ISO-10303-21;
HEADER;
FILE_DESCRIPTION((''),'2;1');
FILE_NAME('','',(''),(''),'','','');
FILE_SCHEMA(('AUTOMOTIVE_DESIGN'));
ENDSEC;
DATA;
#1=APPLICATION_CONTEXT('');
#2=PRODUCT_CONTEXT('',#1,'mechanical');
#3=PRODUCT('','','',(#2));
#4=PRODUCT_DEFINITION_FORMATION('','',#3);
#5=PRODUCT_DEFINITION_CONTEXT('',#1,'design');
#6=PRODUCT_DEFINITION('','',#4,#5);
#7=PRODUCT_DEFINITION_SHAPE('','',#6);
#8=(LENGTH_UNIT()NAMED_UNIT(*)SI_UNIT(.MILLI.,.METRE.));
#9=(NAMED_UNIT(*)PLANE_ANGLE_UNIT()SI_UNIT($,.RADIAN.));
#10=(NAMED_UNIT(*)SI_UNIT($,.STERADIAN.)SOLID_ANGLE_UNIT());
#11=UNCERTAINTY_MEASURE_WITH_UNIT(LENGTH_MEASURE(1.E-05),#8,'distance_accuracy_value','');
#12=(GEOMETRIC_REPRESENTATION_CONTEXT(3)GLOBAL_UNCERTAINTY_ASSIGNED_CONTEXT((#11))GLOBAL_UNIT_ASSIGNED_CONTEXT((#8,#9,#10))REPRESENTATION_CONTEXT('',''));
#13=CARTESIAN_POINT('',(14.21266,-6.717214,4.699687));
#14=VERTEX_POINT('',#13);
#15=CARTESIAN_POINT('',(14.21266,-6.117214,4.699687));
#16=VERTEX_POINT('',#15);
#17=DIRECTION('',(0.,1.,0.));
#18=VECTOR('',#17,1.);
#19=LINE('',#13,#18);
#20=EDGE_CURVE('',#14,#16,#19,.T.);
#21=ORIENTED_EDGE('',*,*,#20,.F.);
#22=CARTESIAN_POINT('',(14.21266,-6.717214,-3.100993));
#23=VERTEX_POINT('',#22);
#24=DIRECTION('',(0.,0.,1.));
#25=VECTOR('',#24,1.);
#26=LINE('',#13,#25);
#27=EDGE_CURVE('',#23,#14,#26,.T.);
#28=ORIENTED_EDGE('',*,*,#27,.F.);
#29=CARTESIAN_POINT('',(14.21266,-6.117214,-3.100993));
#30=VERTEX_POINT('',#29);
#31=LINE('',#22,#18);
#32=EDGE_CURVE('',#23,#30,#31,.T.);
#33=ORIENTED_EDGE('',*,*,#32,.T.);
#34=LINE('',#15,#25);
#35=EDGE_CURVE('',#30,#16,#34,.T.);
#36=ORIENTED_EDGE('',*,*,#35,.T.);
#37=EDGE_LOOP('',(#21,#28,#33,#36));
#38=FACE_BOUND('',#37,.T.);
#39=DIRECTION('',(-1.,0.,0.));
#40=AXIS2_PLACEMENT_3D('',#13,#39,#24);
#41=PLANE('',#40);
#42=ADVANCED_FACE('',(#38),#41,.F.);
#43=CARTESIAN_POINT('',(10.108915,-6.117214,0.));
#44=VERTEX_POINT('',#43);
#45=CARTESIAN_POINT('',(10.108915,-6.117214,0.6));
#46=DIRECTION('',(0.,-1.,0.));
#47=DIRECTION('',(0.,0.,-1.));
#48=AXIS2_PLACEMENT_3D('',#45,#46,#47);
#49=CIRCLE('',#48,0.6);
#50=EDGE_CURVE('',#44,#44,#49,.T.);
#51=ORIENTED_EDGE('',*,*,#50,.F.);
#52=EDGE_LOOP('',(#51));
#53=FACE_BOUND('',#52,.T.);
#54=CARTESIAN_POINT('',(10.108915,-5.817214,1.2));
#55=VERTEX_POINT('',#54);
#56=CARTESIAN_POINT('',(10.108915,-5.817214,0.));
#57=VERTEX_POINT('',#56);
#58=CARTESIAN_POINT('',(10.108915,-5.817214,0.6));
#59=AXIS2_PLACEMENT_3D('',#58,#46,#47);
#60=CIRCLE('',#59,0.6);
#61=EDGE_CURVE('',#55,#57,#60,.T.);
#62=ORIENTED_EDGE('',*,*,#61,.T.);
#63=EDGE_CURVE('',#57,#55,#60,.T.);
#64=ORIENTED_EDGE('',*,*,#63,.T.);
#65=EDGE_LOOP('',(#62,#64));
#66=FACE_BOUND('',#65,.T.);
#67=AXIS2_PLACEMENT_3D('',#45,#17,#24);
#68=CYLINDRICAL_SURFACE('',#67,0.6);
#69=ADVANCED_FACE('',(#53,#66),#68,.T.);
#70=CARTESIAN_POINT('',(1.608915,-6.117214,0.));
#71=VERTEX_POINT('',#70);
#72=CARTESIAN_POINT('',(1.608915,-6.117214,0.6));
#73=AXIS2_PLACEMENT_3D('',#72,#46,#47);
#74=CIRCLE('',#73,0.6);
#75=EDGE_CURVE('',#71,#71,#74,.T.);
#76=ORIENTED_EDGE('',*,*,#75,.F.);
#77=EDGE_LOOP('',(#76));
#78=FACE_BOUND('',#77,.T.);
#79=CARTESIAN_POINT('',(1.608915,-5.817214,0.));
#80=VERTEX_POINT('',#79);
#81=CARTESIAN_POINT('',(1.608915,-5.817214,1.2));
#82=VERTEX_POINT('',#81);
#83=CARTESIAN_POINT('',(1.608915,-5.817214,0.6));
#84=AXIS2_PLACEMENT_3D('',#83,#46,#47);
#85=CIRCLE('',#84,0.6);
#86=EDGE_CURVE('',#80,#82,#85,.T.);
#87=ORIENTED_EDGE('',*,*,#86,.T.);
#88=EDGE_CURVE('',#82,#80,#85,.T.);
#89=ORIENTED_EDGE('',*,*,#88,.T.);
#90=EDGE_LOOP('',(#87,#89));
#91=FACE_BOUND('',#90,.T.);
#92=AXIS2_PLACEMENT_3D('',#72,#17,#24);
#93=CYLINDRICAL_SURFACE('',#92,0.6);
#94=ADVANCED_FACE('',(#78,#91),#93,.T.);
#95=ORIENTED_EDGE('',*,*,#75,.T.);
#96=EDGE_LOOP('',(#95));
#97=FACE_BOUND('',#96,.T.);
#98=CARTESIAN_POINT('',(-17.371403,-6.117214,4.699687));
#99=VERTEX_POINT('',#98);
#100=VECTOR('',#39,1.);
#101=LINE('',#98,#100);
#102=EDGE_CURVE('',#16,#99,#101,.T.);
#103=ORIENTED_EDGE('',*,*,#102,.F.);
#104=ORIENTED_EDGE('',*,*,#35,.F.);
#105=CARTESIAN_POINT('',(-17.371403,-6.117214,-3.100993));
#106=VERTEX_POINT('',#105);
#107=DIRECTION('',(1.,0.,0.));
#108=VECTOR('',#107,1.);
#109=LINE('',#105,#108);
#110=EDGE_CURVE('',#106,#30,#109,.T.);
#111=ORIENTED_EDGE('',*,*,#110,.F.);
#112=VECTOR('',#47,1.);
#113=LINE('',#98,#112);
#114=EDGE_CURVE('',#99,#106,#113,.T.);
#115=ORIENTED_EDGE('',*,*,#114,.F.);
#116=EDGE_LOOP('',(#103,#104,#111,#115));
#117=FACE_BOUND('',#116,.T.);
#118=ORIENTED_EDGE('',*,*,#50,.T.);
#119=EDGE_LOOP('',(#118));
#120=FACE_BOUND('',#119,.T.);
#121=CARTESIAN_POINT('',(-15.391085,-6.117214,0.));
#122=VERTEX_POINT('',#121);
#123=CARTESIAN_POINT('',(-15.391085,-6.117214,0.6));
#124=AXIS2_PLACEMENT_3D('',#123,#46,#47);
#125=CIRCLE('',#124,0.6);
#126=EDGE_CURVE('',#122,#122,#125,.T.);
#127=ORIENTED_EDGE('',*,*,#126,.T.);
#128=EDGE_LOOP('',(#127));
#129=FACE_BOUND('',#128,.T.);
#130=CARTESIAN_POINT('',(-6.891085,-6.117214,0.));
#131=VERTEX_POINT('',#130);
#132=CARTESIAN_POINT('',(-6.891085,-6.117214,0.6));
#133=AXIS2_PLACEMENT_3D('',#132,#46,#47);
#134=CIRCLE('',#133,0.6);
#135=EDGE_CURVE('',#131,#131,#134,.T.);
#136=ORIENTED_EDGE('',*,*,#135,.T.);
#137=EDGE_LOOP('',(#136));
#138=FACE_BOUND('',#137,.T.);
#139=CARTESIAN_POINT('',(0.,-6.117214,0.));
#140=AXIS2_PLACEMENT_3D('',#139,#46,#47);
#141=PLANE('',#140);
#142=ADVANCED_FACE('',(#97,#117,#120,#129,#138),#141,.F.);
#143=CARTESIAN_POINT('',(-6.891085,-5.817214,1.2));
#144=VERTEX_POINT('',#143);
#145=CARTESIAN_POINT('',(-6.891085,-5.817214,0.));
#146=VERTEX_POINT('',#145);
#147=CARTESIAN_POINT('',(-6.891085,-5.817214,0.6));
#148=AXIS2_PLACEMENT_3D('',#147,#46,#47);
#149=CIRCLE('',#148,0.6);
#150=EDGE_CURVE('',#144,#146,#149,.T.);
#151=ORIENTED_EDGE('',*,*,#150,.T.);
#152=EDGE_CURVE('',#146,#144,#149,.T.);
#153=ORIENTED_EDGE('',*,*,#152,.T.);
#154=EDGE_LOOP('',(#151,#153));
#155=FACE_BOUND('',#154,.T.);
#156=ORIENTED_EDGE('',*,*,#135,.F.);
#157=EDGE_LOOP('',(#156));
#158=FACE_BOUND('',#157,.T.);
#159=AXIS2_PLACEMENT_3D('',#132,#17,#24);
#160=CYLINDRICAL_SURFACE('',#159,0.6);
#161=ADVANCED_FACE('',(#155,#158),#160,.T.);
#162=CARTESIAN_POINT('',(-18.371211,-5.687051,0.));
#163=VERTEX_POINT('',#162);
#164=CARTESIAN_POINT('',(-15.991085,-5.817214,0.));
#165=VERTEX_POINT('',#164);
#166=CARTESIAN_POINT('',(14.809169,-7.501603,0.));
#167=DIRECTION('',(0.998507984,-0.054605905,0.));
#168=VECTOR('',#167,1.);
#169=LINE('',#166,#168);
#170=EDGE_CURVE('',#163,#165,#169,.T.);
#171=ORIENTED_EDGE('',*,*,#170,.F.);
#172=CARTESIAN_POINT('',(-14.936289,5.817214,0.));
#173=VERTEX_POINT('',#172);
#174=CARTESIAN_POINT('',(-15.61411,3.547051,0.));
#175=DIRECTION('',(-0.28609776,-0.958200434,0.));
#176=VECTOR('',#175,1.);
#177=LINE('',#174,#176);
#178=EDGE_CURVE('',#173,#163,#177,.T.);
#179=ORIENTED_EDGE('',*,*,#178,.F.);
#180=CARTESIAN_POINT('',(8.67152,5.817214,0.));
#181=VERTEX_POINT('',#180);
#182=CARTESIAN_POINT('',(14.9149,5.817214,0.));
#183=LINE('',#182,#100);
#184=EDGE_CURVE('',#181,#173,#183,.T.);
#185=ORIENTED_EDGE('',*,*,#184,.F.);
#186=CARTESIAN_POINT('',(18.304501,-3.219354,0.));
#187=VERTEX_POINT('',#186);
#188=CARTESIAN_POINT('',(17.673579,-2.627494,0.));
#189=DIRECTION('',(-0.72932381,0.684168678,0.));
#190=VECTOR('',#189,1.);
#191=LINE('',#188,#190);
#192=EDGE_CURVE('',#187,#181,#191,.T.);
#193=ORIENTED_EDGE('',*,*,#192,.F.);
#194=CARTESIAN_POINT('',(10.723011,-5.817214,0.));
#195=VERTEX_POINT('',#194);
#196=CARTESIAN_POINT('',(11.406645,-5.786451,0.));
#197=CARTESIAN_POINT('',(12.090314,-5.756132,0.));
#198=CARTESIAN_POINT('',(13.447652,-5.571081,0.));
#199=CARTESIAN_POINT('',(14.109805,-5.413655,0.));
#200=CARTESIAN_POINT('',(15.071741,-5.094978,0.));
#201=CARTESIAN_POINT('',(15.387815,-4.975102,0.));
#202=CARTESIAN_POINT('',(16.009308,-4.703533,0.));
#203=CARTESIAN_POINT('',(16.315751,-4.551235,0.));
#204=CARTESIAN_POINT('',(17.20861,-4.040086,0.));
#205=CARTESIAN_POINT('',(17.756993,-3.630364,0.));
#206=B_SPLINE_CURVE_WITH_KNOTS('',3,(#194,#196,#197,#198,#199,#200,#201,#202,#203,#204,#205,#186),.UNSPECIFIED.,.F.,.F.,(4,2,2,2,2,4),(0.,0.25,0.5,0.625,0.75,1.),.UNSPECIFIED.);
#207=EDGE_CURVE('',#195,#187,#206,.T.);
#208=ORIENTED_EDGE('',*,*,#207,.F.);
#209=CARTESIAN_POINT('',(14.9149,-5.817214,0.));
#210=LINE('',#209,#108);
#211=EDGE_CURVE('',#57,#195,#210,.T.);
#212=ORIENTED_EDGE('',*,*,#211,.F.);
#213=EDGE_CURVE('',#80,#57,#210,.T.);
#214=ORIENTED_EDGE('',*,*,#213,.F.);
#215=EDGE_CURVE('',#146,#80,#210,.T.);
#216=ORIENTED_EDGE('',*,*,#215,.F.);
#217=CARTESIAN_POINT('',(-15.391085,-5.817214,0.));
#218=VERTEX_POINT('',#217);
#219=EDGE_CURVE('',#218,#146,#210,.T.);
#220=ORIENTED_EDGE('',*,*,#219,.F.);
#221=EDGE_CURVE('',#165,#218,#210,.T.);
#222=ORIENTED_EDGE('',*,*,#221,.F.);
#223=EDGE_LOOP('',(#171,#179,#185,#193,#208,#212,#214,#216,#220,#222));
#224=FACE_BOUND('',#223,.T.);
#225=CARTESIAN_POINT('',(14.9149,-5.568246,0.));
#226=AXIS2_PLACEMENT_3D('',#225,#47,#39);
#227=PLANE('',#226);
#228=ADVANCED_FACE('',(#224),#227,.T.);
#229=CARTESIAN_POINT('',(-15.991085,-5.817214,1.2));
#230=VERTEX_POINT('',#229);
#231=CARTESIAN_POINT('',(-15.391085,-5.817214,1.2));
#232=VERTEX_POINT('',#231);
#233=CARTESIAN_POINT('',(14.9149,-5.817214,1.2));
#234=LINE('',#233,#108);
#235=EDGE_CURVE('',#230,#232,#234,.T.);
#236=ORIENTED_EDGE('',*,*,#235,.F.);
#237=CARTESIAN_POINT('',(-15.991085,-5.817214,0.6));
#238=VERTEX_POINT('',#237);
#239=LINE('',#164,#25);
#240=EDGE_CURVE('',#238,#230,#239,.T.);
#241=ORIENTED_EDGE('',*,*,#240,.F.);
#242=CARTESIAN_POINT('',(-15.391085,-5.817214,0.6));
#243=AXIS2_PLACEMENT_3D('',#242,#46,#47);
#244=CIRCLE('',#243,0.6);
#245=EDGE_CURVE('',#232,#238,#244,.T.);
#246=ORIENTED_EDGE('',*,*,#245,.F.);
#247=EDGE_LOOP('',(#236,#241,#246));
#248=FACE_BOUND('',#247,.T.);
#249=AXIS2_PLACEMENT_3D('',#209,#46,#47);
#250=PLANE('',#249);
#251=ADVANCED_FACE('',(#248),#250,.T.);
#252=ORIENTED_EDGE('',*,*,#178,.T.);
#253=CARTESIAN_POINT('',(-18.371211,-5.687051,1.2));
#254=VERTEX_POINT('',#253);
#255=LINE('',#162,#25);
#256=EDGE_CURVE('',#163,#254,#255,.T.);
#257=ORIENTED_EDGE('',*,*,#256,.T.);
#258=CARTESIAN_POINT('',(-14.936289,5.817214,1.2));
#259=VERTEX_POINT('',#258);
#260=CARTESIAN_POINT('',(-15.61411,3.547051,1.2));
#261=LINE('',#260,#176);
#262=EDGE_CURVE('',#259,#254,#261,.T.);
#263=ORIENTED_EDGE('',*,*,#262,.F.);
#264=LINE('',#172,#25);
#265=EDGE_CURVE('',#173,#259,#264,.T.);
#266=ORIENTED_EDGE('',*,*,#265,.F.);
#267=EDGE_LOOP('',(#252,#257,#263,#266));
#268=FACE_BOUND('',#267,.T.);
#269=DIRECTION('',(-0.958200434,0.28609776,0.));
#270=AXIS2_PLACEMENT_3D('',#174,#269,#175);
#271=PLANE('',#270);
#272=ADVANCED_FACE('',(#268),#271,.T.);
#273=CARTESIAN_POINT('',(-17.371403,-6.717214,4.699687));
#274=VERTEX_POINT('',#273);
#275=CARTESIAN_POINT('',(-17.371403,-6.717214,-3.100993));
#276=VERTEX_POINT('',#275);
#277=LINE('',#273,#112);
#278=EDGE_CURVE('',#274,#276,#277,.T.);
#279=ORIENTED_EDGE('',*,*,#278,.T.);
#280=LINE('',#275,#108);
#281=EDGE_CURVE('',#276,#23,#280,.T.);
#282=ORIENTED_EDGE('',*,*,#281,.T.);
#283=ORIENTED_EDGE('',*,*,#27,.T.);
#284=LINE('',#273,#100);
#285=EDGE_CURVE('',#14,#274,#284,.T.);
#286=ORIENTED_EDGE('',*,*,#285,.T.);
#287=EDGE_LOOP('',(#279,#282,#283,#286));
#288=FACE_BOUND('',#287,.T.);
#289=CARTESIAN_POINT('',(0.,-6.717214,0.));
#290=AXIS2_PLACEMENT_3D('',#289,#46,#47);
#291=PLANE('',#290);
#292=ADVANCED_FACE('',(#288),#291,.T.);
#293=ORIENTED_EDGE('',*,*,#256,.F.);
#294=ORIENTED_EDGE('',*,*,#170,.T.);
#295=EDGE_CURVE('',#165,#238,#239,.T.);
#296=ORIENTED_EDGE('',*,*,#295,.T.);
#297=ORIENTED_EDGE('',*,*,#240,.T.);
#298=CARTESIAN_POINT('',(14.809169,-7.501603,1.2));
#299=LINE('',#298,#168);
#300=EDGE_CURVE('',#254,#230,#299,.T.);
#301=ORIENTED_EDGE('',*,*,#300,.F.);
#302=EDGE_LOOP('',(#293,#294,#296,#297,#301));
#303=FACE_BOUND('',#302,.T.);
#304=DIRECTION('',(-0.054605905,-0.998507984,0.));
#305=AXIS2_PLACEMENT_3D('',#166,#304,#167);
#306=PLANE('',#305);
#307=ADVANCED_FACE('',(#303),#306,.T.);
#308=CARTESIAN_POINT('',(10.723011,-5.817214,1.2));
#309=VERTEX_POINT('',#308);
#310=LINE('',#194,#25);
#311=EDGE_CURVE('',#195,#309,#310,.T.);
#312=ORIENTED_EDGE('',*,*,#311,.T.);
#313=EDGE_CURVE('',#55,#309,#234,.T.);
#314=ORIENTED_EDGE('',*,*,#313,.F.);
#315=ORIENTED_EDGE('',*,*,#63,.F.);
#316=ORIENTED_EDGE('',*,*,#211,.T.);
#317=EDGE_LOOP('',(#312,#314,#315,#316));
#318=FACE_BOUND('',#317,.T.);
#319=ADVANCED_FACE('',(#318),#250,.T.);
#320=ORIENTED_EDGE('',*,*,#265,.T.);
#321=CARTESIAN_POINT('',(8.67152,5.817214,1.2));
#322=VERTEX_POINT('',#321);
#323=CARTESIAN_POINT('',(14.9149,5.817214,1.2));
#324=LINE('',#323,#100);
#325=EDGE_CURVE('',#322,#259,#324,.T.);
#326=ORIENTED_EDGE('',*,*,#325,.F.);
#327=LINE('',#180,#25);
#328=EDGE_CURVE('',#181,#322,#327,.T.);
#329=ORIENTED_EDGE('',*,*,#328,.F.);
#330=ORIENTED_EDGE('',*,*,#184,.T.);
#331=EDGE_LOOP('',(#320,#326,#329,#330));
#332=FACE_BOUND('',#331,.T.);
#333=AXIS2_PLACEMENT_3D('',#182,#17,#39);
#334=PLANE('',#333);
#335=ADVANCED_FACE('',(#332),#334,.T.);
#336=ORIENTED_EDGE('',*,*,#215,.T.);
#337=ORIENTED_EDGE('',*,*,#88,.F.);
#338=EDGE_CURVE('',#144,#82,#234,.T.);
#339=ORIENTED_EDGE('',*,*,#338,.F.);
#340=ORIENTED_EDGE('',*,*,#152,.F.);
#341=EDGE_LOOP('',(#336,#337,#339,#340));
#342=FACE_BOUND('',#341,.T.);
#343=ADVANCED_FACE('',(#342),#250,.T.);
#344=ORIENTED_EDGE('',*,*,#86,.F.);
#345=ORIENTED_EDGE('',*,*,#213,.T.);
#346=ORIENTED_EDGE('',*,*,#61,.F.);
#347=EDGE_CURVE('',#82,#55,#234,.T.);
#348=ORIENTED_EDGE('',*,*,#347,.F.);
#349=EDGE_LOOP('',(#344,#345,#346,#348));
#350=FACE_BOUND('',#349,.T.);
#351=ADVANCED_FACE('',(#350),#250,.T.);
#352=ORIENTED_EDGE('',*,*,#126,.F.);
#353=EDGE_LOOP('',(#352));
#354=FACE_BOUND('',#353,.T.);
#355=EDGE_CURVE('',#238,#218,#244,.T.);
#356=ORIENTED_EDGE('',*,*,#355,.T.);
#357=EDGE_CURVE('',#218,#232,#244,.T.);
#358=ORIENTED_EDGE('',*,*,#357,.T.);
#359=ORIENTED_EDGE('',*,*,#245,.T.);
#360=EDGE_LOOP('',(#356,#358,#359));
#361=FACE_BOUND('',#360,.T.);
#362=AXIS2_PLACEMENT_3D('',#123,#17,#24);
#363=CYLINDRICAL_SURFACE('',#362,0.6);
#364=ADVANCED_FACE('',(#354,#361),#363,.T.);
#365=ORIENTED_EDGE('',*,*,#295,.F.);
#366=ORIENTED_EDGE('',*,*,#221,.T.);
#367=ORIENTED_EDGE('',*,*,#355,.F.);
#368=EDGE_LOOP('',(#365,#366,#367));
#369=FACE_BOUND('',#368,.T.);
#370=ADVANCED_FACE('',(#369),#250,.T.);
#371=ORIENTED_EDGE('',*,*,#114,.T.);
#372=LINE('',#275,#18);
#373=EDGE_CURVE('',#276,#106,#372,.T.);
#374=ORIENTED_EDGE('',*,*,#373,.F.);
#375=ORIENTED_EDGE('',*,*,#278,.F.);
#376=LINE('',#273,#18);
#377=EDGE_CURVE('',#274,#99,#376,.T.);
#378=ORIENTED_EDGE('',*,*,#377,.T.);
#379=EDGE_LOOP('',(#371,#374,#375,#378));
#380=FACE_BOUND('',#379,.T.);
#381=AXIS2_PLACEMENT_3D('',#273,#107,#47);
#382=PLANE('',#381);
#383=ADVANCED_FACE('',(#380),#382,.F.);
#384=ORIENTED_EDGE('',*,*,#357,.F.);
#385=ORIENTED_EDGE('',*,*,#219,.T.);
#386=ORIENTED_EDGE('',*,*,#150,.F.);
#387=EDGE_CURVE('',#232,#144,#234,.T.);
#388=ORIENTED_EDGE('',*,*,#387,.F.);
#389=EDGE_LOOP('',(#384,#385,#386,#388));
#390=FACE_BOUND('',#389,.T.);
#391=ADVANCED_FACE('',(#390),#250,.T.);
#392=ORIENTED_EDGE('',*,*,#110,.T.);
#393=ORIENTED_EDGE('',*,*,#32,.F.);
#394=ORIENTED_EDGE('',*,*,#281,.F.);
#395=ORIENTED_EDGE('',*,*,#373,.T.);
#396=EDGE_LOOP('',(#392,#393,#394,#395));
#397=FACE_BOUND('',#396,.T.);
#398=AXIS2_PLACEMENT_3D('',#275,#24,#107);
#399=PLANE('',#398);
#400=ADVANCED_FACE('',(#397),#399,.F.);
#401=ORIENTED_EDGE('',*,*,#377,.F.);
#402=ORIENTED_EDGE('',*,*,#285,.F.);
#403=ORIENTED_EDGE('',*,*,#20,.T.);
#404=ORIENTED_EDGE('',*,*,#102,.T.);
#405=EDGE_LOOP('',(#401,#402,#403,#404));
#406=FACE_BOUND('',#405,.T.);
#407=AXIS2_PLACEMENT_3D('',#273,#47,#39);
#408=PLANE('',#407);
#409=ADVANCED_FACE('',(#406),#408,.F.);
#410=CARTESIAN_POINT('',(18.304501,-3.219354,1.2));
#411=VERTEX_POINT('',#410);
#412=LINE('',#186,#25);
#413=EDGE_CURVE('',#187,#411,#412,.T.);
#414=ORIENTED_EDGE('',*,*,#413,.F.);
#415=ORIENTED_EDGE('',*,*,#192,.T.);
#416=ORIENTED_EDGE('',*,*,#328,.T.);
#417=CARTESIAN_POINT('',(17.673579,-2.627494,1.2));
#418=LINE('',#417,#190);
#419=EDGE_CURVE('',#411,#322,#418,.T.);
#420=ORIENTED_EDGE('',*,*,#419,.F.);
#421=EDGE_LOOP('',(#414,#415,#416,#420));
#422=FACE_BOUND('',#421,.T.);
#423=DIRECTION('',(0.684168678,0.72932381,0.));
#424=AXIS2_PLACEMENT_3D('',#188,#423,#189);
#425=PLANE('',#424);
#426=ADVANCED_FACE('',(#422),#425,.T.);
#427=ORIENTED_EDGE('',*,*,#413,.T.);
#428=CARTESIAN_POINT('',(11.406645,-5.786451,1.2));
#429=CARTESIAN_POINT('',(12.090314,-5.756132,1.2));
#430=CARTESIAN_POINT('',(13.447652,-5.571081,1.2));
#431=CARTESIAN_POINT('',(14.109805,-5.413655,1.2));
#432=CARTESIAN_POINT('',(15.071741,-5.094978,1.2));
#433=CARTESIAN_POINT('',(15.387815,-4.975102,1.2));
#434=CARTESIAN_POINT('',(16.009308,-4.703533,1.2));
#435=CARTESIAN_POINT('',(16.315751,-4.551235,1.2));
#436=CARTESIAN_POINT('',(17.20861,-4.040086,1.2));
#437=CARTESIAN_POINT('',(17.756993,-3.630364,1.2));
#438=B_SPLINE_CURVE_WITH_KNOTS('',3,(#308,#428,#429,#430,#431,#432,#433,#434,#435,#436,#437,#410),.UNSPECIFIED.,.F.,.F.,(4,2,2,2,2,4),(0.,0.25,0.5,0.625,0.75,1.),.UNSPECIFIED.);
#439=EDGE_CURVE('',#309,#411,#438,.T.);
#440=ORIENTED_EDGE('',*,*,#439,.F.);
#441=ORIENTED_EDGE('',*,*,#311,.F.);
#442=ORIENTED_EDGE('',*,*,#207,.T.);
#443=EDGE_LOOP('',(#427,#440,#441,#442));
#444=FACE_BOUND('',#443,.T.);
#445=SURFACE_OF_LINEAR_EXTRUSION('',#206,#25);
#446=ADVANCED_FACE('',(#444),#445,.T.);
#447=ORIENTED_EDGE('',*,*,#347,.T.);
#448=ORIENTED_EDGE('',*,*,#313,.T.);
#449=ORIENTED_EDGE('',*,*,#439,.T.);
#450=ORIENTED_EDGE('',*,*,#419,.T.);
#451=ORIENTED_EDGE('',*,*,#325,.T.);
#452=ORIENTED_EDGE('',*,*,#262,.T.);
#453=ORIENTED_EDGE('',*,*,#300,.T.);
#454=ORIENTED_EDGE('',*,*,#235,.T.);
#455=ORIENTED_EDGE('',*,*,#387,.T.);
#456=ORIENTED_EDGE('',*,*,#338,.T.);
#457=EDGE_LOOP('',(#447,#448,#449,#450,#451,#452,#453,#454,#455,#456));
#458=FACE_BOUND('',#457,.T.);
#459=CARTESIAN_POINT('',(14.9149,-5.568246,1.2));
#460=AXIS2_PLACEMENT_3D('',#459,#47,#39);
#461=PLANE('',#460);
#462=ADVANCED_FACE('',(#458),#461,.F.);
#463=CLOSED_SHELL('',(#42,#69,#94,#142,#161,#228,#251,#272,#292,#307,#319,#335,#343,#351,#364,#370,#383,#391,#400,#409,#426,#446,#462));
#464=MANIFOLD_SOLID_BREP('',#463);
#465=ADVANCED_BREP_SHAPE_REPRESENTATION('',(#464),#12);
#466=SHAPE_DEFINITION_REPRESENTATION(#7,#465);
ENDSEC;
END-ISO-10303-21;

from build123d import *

# Parameters (mm, degrees)
EXTRUDE_1_DEPTH     = 1.2
CUT_EXTRUDE_START   = -1.2
CUT_EXTRUDE_1_DEPTH = 1.2
SKETCH_3_R          = 0.6
EXTRUDE_2_DEPTH     = 0.3
SKETCH_4_W          = 31.58406245
SKETCH_4_H          = 7.800680058
EXTRUDE_3_DEPTH     = 0.6


# Read off the part's stored shape, not the designer's step: Вырез-Вытянуть-Тонкостенный1
with BuildPart() as part:
    # Эскиз1 → Бобышка-Вытянуть1 (new body)
    with BuildSketch(Plane.XY):
        with BuildLine():
            Line((-18.4888994, -6.081212357), (-16.002013835, -6.217213911))
            Line((-16.002013835, -6.217213911), (10.732005982, -6.217213911))
            add(Edge.make_bspline(
                [(10.732005982, -6.217213911), (11.47341135, -6.18385268), (12.922426791, -6.118650915), (15.00936311, -5.600631561), (16.935457079, -4.747576966), (18.044624718, -3.914711141), (18.600667338, -3.497182825)],
                knots=[0, 0, 0, 0, 0.261630689, 0.511335532, 0.755025064, 1, 1, 1, 1], degree=3))
            Line((18.600667338, -3.497182825), (18.870975113, -3.202301616))
            Line((18.870975113, -3.202301616), (8.829771562, 6.217213911))
            Line((8.829771562, 6.217213911), (-15.234306629, 6.217213911))
            Line((-15.234306629, 6.217213911), (-18.870975113, -5.962739267))
            Line((-18.870975113, -5.962739267), (-18.4888994, -6.081212357))
        make_face()
    extrude(amount=EXTRUDE_1_DEPTH)

    # Вырез-Вытянуть-Тонкостенный1 outline → Вырез-Вытянуть-Тонкостенный1 (cut)
    with BuildSketch(Plane.XY.offset(1.2).offset(CUT_EXTRUDE_START)):
        with BuildLine():
            Line((-16.002013835, -6.217213911), (10.732005982, -6.217213911))
            add(Edge.make_bspline(
                [(10.732005982, -6.217213911), (11.47341135, -6.18385268), (12.922426791, -6.118650915), (15.00936311, -5.600631561), (16.935457079, -4.747576966), (18.044624718, -3.914711141), (18.600667338, -3.497182825)],
                knots=[0, 0, 0, 0, 0.261630689, 0.511335532, 0.755025064, 1, 1, 1, 1], degree=3))
            Line((18.600667338, -3.497182825), (18.870975113, -3.202301616))
            Line((18.870975113, -3.202301616), (8.829771562, 6.217213911))
            Line((8.829771562, 6.217213911), (-15.234306629, 6.217213911))
            Line((-15.234306629, 6.217213911), (-18.870975113, -5.962739267))
            Line((-18.870975113, -5.962739267), (-18.4888994, -6.081212357))
            Line((-18.4888994, -6.081212357), (-16.002013835, -6.217213911))
        make_face()
        with BuildLine():
            add(Edge.make_bspline(
                [(10.723010965, -5.817213911), (11.406644912, -5.786451106), (12.090314496, -5.756131603), (13.447652329, -5.571081257), (14.109804636, -5.413655126), (15.071741231, -5.094978106), (15.387815329, -4.97510238), (16.009307585, -4.703532881), (16.315751157, -4.551234574), (17.2086095, -4.040085881), (17.756993168, -3.630363934), (18.304501391, -3.219353606)],
                knots=[0, 0, 0, 0, 0.25, 0.25, 0.5, 0.5, 0.625, 0.625, 0.75, 0.75, 1, 1, 1, 1], degree=3))
            Line((10.723010965, -5.817213911), (-15.991084501, -5.817213911))
            Line((-15.991084501, -5.817213911), (-18.37121133, -5.687050725))
            Line((-18.37121133, -5.687050725), (-14.936288713, 5.817213911))
            Line((-14.936288713, 5.817213911), (8.671520418, 5.817213911))
            Line((8.671520418, 5.817213911), (18.304501391, -3.219353606))
        make_face(mode=Mode.SUBTRACT)
    extrude(amount=CUT_EXTRUDE_1_DEPTH, mode=Mode.SUBTRACT)

    # Эскиз3 → Бобышка-Вытянуть2 (add)
    with BuildSketch(Plane.XZ.offset(5.817213911)):
        with Locations(Location((-15.391084501, 0.6, 0), (0, 0, 270))):
            Circle(SKETCH_3_R)
        with Locations(Location((-6.891084501, 0.6, 0), (0, 0, 270))):
            Circle(SKETCH_3_R)
        with Locations(Location((1.608915499, 0.6, 0), (0, 0, 270))):
            Circle(SKETCH_3_R)
        with Locations(Location((10.108915499, 0.6, 0), (0, 0, 270))):
            Circle(SKETCH_3_R)
    extrude(amount=EXTRUDE_2_DEPTH)

    # Эскиз4 → Бобышка-Вытянуть3 (add)
    with BuildSketch(Plane.XZ.offset(6.117213911)):
        with Locations((-1.579371694, 0.79934669)):
            Rectangle(SKETCH_4_W, SKETCH_4_H)
    extrude(amount=EXTRUDE_3_DEPTH)


solid = part.part
